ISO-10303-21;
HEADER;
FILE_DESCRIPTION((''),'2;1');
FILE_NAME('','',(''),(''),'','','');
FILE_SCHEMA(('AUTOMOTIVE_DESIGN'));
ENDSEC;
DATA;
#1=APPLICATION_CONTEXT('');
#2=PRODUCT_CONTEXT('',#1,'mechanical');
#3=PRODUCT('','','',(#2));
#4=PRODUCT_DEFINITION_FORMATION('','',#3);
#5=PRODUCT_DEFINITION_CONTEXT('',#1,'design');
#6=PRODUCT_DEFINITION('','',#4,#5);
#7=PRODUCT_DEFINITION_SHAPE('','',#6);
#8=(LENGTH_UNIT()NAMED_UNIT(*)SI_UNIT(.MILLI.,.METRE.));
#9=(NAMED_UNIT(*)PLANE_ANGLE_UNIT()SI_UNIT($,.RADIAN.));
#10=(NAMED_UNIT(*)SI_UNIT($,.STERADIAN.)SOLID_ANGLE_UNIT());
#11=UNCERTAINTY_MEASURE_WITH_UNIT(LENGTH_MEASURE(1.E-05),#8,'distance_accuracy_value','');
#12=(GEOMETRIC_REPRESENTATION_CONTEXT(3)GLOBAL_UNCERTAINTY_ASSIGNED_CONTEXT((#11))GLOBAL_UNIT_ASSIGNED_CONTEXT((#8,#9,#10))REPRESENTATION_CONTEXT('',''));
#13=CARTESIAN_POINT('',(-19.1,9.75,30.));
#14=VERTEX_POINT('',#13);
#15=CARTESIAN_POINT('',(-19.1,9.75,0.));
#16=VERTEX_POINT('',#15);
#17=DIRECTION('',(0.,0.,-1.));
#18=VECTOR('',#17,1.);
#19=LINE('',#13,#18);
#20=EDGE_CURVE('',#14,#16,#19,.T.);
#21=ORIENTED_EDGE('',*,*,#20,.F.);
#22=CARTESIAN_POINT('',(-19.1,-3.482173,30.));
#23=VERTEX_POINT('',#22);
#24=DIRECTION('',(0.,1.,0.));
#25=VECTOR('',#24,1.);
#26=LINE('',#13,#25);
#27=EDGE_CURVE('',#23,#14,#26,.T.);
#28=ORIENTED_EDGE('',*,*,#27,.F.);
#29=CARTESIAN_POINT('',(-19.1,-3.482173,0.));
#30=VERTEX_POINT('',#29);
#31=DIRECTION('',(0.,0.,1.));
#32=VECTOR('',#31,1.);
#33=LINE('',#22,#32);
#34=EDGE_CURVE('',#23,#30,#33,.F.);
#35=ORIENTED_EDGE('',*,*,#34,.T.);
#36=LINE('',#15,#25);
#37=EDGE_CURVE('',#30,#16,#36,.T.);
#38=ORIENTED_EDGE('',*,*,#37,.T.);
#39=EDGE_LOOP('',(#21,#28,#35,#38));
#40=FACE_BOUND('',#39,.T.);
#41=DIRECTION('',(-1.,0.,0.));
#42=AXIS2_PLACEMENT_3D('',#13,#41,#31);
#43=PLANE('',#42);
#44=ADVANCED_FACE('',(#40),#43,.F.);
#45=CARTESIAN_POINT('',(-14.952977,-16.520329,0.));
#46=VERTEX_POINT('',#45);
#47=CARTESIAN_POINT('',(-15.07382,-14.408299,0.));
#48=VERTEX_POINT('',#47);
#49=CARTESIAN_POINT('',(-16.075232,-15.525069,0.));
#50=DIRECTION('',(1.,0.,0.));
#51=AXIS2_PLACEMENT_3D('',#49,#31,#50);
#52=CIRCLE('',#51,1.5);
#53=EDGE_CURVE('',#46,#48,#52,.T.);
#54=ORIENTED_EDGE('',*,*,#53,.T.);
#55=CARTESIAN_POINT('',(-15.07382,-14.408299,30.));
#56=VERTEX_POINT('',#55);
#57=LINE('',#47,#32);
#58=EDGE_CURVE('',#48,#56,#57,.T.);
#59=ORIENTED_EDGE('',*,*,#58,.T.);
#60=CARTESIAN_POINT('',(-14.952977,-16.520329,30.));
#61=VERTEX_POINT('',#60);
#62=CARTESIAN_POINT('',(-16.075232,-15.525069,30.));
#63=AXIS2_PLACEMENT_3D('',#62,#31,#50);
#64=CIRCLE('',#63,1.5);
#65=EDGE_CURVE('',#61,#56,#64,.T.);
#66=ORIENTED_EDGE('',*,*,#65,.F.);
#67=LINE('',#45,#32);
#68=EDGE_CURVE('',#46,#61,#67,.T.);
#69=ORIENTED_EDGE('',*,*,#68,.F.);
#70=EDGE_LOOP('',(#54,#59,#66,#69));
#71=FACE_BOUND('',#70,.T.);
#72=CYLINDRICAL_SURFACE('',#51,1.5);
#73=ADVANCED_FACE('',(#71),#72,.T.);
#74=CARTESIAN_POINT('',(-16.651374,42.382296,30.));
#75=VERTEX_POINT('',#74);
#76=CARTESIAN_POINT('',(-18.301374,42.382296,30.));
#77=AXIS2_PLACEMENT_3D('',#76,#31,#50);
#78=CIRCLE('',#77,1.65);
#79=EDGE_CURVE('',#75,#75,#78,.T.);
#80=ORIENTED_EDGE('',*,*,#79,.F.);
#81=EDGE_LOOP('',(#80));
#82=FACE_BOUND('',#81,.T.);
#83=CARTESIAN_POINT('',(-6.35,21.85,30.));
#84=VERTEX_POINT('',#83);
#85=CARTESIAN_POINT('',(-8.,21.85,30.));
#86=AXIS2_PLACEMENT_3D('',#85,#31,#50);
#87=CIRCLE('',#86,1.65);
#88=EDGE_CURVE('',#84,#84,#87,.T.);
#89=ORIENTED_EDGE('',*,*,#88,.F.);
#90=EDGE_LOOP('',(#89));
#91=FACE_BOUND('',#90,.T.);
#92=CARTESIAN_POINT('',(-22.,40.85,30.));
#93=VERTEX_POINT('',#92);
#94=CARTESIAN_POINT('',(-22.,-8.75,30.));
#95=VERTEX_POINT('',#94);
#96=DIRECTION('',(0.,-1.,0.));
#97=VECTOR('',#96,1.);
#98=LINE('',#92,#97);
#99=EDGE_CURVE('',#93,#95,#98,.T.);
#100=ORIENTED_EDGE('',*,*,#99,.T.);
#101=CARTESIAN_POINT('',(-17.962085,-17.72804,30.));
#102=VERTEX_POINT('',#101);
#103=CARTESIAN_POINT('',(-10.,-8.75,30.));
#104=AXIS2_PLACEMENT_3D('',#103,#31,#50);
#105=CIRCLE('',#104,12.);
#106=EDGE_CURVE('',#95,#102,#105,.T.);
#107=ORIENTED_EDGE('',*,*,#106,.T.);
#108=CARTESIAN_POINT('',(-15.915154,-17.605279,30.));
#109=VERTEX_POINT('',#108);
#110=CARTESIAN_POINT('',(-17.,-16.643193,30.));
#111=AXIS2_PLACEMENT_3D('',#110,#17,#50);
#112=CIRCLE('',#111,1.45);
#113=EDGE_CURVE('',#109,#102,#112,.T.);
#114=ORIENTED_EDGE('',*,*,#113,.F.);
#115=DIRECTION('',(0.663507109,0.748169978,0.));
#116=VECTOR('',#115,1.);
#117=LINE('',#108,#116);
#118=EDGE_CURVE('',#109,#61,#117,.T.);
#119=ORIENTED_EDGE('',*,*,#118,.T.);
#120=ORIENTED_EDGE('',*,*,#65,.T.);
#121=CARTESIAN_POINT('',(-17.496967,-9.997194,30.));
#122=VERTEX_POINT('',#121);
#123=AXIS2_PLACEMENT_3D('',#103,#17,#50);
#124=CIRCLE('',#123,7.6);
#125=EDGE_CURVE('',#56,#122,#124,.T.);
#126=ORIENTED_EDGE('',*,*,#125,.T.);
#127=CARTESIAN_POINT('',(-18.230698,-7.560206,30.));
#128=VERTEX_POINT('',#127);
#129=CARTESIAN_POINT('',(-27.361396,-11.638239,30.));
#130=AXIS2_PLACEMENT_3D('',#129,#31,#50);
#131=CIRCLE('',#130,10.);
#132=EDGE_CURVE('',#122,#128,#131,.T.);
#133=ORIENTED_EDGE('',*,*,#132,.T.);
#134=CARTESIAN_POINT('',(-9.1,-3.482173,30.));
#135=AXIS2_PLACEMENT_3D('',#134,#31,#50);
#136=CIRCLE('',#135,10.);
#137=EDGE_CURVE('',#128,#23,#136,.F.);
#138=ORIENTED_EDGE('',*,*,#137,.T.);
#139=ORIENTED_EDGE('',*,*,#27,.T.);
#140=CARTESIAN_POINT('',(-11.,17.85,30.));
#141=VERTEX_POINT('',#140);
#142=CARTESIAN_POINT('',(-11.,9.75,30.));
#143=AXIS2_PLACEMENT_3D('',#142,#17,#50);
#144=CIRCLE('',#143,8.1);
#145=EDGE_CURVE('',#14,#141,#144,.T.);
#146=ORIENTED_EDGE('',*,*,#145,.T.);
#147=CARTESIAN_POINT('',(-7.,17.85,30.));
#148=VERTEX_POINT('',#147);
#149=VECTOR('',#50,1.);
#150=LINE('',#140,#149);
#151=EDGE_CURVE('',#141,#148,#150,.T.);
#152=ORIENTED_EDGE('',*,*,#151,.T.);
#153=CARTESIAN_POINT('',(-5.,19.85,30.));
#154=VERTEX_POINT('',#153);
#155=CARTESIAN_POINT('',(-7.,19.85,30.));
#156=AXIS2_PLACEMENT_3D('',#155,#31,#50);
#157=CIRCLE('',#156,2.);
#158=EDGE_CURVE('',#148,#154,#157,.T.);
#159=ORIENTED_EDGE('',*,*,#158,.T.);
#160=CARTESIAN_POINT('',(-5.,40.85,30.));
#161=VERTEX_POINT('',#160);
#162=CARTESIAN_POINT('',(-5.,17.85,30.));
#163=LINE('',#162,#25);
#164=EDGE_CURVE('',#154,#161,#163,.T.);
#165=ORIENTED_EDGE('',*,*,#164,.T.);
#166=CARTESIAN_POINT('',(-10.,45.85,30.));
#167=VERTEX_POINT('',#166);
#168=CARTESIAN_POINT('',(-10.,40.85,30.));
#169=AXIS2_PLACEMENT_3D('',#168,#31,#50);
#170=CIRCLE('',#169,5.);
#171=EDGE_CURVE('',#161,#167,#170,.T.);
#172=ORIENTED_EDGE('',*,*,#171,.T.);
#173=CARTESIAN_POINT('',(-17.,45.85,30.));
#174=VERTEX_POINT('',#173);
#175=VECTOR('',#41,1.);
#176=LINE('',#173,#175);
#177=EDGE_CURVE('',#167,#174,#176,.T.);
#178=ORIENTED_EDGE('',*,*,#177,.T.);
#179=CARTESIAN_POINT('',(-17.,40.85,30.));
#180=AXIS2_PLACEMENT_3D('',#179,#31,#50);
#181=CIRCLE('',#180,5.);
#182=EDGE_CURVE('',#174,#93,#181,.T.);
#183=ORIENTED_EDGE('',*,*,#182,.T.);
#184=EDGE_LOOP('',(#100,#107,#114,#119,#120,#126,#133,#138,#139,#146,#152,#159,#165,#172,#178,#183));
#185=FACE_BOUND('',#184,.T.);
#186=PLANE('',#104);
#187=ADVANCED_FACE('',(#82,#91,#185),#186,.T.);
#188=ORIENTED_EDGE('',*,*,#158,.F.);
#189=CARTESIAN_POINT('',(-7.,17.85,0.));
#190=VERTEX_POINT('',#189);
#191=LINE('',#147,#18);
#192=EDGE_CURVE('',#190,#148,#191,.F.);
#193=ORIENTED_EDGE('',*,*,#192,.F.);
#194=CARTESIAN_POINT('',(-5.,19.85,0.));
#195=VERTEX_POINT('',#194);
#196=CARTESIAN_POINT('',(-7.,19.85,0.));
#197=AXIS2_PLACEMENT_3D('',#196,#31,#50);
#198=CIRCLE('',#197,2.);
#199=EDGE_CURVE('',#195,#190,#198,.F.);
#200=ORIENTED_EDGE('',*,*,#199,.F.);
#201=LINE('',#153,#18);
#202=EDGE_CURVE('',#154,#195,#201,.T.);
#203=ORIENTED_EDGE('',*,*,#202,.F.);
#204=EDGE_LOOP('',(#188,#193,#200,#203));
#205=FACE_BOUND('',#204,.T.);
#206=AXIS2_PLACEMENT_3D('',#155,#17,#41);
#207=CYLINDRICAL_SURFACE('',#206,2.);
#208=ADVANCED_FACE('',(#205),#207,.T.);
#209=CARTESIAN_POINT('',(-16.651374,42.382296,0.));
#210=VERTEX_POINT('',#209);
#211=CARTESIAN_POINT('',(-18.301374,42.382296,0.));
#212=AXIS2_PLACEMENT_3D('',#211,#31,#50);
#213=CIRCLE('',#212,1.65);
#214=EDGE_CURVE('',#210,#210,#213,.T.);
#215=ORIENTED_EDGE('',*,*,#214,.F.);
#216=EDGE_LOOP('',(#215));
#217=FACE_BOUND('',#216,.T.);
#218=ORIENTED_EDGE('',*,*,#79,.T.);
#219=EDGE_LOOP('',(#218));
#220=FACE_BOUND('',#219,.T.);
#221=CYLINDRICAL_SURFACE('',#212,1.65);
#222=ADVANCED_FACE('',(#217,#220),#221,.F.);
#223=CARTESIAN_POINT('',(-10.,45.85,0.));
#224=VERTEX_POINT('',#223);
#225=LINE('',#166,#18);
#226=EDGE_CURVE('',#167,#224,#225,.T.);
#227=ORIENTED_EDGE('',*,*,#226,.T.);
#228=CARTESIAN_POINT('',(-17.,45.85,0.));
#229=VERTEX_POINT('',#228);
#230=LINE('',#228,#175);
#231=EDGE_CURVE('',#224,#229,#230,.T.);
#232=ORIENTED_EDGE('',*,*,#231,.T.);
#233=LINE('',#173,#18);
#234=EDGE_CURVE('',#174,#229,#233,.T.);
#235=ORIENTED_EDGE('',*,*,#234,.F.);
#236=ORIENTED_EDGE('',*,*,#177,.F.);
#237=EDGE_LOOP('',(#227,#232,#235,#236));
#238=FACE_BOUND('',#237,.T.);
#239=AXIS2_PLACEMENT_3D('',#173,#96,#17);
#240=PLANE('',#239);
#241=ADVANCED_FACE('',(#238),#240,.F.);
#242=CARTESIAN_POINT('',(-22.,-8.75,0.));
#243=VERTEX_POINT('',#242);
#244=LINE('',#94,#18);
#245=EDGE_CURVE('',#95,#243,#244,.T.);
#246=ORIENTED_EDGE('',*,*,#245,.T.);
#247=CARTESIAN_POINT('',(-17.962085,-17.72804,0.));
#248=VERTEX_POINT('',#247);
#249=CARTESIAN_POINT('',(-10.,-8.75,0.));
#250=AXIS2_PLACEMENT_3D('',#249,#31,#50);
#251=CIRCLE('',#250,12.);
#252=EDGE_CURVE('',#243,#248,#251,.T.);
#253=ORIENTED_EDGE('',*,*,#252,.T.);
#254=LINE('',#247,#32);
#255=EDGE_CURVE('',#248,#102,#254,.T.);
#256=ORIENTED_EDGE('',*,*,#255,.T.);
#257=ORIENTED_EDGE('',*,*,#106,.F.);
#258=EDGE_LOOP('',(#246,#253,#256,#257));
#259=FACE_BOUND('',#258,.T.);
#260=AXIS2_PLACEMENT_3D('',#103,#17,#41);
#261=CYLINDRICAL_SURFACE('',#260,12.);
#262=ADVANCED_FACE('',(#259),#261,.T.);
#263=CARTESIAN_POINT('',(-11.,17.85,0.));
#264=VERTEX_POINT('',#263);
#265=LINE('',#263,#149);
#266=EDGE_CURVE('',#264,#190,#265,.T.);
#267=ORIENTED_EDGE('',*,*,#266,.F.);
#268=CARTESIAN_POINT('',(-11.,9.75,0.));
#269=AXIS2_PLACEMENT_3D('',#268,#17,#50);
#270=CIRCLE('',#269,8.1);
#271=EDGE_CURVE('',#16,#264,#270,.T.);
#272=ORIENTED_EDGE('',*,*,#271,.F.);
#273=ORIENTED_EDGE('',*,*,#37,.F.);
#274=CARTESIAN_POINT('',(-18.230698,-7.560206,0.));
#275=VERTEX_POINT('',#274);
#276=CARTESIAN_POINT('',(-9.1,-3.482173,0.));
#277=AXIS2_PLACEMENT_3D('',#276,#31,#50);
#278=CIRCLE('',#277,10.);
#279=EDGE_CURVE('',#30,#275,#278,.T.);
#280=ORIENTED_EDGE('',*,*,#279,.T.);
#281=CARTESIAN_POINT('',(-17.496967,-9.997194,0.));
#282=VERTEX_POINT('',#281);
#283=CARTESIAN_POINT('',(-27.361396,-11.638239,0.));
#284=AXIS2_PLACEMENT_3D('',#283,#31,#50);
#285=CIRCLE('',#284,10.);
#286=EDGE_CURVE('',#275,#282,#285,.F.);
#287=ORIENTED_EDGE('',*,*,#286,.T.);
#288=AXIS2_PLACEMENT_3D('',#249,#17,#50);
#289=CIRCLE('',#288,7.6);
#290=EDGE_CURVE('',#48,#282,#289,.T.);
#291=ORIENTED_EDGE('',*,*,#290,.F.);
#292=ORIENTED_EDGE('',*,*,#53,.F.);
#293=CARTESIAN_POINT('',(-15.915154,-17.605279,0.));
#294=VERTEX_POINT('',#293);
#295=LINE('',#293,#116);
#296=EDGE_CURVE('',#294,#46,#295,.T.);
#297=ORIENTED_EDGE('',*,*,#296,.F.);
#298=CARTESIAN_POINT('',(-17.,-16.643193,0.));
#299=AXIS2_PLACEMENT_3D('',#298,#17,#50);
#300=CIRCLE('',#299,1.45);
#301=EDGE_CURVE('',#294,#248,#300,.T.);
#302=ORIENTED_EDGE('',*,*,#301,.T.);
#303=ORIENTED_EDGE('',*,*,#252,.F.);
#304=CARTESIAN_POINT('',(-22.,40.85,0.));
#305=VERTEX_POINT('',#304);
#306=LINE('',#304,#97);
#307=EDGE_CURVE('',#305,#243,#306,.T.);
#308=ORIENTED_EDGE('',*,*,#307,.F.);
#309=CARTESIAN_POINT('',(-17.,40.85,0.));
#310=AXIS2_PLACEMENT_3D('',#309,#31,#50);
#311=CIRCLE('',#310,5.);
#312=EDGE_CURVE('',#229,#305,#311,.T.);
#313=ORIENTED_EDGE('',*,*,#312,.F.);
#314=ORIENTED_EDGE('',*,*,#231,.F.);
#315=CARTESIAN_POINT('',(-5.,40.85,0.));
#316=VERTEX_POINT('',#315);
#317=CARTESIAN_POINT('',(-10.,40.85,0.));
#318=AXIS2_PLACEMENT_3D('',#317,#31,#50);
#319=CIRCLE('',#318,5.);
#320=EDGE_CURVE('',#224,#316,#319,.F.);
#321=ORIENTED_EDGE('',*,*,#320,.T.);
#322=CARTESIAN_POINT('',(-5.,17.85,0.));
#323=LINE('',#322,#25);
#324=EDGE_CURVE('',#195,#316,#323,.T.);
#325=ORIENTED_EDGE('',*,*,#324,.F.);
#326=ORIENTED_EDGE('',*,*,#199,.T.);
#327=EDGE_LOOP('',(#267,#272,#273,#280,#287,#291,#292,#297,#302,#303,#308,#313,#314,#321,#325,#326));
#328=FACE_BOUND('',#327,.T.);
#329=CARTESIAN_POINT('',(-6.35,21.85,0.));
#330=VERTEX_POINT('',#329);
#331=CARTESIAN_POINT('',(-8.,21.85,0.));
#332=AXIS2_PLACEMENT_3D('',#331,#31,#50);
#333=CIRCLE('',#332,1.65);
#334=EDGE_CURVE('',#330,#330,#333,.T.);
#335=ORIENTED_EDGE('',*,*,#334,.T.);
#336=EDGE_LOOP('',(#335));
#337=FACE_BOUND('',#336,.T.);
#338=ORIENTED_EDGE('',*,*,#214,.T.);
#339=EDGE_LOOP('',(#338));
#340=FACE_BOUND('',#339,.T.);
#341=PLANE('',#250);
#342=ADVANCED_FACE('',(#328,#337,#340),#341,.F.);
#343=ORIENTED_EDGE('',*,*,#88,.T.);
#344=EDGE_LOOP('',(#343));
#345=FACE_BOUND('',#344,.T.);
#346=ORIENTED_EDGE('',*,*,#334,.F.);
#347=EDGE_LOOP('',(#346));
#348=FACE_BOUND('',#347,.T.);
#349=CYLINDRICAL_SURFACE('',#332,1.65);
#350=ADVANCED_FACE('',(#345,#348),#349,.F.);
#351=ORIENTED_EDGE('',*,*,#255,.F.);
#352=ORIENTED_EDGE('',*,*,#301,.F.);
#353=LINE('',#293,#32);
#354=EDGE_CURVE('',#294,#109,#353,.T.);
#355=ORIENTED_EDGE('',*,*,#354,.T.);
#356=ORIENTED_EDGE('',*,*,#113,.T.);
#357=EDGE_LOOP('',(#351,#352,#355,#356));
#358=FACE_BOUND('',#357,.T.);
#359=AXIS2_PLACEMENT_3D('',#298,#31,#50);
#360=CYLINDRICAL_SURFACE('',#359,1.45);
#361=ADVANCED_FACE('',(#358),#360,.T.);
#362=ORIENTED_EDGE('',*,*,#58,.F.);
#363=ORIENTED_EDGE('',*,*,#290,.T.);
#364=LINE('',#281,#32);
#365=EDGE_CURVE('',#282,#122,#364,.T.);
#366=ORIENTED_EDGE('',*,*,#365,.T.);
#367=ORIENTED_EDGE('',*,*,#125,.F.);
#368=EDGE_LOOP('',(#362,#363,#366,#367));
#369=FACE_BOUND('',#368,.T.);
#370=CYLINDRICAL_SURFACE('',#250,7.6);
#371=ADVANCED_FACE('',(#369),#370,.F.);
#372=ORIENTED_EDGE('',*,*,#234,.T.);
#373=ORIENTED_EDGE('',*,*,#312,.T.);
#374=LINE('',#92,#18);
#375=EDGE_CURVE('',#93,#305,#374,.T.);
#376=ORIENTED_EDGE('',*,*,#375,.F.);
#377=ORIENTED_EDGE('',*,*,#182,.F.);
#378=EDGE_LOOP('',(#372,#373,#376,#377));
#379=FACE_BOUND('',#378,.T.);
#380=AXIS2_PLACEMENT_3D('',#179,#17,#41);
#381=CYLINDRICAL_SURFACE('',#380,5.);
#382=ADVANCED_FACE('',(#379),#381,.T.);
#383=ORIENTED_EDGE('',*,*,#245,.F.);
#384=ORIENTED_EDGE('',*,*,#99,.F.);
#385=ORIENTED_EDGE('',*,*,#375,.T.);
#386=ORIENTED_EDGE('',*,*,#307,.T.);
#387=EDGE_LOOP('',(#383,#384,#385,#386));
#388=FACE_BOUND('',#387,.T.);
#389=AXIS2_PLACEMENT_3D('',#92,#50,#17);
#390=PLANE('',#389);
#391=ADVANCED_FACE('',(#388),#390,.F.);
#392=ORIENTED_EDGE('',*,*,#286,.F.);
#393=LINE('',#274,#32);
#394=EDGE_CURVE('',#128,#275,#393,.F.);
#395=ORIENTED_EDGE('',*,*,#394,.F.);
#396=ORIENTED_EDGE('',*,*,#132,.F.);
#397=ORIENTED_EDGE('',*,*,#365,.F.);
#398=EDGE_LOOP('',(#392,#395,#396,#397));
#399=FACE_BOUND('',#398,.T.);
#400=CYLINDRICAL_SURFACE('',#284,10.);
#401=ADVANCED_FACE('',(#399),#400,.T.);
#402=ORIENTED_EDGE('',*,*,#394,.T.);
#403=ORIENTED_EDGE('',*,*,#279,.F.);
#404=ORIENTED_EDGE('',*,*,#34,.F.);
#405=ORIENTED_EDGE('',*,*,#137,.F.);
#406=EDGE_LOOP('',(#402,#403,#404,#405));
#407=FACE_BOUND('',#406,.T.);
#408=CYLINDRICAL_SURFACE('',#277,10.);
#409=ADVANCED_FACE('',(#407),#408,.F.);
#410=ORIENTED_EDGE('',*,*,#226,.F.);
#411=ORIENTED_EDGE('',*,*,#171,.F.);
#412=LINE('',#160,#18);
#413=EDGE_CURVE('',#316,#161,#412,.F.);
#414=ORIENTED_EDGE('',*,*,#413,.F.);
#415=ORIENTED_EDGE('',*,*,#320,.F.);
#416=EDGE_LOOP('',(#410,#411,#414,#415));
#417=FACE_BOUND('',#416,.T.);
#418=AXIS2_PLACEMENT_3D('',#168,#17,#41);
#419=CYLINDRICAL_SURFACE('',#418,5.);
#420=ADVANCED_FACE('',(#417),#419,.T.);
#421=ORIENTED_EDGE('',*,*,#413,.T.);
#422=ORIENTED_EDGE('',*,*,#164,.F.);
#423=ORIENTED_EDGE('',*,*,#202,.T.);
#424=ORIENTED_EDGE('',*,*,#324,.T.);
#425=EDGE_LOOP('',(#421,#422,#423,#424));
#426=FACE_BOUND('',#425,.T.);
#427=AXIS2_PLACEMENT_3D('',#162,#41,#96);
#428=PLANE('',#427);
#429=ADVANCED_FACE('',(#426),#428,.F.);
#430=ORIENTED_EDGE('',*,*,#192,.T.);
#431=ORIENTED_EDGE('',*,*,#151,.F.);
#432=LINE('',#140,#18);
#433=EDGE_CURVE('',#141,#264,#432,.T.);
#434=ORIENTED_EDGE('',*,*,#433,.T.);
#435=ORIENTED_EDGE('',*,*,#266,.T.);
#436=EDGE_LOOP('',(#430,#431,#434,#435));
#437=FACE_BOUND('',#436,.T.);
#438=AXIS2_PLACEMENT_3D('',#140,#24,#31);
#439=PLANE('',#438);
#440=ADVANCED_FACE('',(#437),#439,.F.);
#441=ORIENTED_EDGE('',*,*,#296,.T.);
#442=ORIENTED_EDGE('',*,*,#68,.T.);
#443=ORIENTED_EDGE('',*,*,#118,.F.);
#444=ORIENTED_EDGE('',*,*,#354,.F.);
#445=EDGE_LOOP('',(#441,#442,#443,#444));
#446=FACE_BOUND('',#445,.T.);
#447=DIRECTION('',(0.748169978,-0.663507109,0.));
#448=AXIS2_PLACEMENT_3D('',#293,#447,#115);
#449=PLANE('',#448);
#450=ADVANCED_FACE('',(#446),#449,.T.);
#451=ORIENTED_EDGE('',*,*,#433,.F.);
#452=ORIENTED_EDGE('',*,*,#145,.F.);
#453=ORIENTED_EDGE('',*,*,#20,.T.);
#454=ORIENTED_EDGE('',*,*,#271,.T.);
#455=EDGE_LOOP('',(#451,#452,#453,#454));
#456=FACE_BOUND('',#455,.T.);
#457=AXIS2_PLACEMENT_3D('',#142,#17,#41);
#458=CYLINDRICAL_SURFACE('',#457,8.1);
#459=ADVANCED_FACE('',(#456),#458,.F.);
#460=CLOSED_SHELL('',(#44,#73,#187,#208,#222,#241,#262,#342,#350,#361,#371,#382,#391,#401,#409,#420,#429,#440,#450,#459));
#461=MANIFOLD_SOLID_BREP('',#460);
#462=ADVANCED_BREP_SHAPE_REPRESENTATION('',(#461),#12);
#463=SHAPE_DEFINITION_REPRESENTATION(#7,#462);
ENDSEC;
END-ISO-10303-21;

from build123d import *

# Parameters (mm, degrees)
EXTRUDE_1_DEPTH     = 30
CUT_EXTRUDE_2_DEPTH = 60.044241887
EXTRUDE_2_DEPTH     = 30
FILLET_2_R          = 10
FILLET_3_R          = 10
SKETCH_6_R          = 1.65
CUT_EXTRUDE_3_DEPTH = 60.044242053
FILLET_4_R          = 2
FILLET_6_R          = 5


with BuildPart() as part:
    # 草图2 → 凸台-拉伸1 (new body)
    with BuildSketch(Plane.XY):
        with BuildLine():
            Line((-22, 40.85), (-22, -8.75))
            ThreePointArc((-22, -8.75), (-18.485281374, -17.235281374), (-10, -20.75))
            Line((-10, -20.75), (-10, -17.85))
            ThreePointArc((-10, -17.85), (-16.434671709, -15.184671709), (-19.1, -8.75))
            Line((-19.1, -8.75), (-19.1, 9.75))
            ThreePointArc((-19.1, 9.75), (-16.727564928, 15.477564928), (-11, 17.85))
            Line((-11, 17.85), (-5, 17.85))
            Line((-5, 17.85), (-5, 45.85))
            Line((-5, 45.85), (-17, 45.85))
            ThreePointArc((-17, 45.85), (-20.535533906, 44.385533906), (-22, 40.85))
        make_face()
    extrude(amount=EXTRUDE_1_DEPTH)

    # 草图4 → 切除-拉伸2 (cut, through all)
    with BuildSketch(Plane.XY.offset(30)):
        with BuildLine():
            Line((-10, -17.85), (-10, -20.75))
            ThreePointArc((-10, -20.75), (-14.258140623, -19.969101498), (-17.962085308, -17.728039739))
            ThreePointArc((-17.962085308, -17.728039739), (-15.915153532, -17.605278578), (-16.037914692, -15.558346802))
            ThreePointArc((-16.037914692, -15.558346802), (-13.229089973, -17.257818636), (-10, -17.85))
        make_face()
    extrude(amount=-CUT_EXTRUDE_2_DEPTH, mode=Mode.SUBTRACT)

    # 草图5 → 凸台-拉伸2 (add, through all)
    with BuildSketch(Plane.XY.offset(30)):
        with BuildLine():
            Line((-17.6, -8.75), (-19.1, -8.75))
            Line((-19.1, -8.75), (-19.1, -14.554532695))
            Line((-19.1, -14.554532695), (-15.915153532, -17.605278578))
            Line((-15.915153532, -17.605278578), (-14.952977082, -16.520329338))
            ThreePointArc((-14.952977082, -16.520329338), (-14.577681338, -15.439383984), (-15.073820173, -14.408299113))
            ThreePointArc((-15.073820173, -14.408299113), (-16.939777854, -11.848303301), (-17.6, -8.75))
        make_face()
    extrude(amount=-EXTRUDE_2_DEPTH)

    # 圆角2
    # the kernel refuses this fillet: 10 mm, written as the material it adds along each edge
    with BuildSketch(Plane(origin=(-19.1, -8.75, 0), x_dir=(0, 1, 0), z_dir=(0, 0, 1))) as fillet_2_piece_1:
        with BuildLine():
            CenterArc((5.267826876, -10), FILLET_2_R, 90, 31.788330617)
            Line((0, -1.5), (-0.105356538, -1.33))
            ThreePointArc((-0.105356538, -1.33), (-0.2, -0.75), (-0.2, 0))
            Line((-0.2, 0), (0, 0.2))
            Line((0, 0.2), (5.267826876, 0.2))
            Line((5.267826876, 0.2), (5.267826876, 0))
        make_face()
    extrude(amount=30)

    # 圆角3
    fillet_3_edges = [part.edges().sort_by_distance(p)[0] for p in [
        (-17.6, -8.75, 15),
    ]]
    fillet(fillet_3_edges, radius=FILLET_3_R)

    # 草图6 → 切除-拉伸3 (cut, through all)
    with BuildSketch(Plane.XY.offset(30)):
        with Locations((-8, 21.85)):
            Circle(SKETCH_6_R)
        with Locations((-18.301374289, 42.382296182)):
            Circle(SKETCH_6_R)
    extrude(amount=-CUT_EXTRUDE_3_DEPTH, mode=Mode.SUBTRACT)

    # 圆角4
    fillet_4_edges = [part.edges().sort_by_distance(p)[0] for p in [
        (-5, 17.85, 15),
    ]]
    fillet(fillet_4_edges, radius=FILLET_4_R)

    # 圆角6
    fillet_6_edges = [part.edges().sort_by_distance(p)[0] for p in [
        (-5, 45.85, 15),
    ]]
    fillet(fillet_6_edges, radius=FILLET_6_R)


solid = part.part
